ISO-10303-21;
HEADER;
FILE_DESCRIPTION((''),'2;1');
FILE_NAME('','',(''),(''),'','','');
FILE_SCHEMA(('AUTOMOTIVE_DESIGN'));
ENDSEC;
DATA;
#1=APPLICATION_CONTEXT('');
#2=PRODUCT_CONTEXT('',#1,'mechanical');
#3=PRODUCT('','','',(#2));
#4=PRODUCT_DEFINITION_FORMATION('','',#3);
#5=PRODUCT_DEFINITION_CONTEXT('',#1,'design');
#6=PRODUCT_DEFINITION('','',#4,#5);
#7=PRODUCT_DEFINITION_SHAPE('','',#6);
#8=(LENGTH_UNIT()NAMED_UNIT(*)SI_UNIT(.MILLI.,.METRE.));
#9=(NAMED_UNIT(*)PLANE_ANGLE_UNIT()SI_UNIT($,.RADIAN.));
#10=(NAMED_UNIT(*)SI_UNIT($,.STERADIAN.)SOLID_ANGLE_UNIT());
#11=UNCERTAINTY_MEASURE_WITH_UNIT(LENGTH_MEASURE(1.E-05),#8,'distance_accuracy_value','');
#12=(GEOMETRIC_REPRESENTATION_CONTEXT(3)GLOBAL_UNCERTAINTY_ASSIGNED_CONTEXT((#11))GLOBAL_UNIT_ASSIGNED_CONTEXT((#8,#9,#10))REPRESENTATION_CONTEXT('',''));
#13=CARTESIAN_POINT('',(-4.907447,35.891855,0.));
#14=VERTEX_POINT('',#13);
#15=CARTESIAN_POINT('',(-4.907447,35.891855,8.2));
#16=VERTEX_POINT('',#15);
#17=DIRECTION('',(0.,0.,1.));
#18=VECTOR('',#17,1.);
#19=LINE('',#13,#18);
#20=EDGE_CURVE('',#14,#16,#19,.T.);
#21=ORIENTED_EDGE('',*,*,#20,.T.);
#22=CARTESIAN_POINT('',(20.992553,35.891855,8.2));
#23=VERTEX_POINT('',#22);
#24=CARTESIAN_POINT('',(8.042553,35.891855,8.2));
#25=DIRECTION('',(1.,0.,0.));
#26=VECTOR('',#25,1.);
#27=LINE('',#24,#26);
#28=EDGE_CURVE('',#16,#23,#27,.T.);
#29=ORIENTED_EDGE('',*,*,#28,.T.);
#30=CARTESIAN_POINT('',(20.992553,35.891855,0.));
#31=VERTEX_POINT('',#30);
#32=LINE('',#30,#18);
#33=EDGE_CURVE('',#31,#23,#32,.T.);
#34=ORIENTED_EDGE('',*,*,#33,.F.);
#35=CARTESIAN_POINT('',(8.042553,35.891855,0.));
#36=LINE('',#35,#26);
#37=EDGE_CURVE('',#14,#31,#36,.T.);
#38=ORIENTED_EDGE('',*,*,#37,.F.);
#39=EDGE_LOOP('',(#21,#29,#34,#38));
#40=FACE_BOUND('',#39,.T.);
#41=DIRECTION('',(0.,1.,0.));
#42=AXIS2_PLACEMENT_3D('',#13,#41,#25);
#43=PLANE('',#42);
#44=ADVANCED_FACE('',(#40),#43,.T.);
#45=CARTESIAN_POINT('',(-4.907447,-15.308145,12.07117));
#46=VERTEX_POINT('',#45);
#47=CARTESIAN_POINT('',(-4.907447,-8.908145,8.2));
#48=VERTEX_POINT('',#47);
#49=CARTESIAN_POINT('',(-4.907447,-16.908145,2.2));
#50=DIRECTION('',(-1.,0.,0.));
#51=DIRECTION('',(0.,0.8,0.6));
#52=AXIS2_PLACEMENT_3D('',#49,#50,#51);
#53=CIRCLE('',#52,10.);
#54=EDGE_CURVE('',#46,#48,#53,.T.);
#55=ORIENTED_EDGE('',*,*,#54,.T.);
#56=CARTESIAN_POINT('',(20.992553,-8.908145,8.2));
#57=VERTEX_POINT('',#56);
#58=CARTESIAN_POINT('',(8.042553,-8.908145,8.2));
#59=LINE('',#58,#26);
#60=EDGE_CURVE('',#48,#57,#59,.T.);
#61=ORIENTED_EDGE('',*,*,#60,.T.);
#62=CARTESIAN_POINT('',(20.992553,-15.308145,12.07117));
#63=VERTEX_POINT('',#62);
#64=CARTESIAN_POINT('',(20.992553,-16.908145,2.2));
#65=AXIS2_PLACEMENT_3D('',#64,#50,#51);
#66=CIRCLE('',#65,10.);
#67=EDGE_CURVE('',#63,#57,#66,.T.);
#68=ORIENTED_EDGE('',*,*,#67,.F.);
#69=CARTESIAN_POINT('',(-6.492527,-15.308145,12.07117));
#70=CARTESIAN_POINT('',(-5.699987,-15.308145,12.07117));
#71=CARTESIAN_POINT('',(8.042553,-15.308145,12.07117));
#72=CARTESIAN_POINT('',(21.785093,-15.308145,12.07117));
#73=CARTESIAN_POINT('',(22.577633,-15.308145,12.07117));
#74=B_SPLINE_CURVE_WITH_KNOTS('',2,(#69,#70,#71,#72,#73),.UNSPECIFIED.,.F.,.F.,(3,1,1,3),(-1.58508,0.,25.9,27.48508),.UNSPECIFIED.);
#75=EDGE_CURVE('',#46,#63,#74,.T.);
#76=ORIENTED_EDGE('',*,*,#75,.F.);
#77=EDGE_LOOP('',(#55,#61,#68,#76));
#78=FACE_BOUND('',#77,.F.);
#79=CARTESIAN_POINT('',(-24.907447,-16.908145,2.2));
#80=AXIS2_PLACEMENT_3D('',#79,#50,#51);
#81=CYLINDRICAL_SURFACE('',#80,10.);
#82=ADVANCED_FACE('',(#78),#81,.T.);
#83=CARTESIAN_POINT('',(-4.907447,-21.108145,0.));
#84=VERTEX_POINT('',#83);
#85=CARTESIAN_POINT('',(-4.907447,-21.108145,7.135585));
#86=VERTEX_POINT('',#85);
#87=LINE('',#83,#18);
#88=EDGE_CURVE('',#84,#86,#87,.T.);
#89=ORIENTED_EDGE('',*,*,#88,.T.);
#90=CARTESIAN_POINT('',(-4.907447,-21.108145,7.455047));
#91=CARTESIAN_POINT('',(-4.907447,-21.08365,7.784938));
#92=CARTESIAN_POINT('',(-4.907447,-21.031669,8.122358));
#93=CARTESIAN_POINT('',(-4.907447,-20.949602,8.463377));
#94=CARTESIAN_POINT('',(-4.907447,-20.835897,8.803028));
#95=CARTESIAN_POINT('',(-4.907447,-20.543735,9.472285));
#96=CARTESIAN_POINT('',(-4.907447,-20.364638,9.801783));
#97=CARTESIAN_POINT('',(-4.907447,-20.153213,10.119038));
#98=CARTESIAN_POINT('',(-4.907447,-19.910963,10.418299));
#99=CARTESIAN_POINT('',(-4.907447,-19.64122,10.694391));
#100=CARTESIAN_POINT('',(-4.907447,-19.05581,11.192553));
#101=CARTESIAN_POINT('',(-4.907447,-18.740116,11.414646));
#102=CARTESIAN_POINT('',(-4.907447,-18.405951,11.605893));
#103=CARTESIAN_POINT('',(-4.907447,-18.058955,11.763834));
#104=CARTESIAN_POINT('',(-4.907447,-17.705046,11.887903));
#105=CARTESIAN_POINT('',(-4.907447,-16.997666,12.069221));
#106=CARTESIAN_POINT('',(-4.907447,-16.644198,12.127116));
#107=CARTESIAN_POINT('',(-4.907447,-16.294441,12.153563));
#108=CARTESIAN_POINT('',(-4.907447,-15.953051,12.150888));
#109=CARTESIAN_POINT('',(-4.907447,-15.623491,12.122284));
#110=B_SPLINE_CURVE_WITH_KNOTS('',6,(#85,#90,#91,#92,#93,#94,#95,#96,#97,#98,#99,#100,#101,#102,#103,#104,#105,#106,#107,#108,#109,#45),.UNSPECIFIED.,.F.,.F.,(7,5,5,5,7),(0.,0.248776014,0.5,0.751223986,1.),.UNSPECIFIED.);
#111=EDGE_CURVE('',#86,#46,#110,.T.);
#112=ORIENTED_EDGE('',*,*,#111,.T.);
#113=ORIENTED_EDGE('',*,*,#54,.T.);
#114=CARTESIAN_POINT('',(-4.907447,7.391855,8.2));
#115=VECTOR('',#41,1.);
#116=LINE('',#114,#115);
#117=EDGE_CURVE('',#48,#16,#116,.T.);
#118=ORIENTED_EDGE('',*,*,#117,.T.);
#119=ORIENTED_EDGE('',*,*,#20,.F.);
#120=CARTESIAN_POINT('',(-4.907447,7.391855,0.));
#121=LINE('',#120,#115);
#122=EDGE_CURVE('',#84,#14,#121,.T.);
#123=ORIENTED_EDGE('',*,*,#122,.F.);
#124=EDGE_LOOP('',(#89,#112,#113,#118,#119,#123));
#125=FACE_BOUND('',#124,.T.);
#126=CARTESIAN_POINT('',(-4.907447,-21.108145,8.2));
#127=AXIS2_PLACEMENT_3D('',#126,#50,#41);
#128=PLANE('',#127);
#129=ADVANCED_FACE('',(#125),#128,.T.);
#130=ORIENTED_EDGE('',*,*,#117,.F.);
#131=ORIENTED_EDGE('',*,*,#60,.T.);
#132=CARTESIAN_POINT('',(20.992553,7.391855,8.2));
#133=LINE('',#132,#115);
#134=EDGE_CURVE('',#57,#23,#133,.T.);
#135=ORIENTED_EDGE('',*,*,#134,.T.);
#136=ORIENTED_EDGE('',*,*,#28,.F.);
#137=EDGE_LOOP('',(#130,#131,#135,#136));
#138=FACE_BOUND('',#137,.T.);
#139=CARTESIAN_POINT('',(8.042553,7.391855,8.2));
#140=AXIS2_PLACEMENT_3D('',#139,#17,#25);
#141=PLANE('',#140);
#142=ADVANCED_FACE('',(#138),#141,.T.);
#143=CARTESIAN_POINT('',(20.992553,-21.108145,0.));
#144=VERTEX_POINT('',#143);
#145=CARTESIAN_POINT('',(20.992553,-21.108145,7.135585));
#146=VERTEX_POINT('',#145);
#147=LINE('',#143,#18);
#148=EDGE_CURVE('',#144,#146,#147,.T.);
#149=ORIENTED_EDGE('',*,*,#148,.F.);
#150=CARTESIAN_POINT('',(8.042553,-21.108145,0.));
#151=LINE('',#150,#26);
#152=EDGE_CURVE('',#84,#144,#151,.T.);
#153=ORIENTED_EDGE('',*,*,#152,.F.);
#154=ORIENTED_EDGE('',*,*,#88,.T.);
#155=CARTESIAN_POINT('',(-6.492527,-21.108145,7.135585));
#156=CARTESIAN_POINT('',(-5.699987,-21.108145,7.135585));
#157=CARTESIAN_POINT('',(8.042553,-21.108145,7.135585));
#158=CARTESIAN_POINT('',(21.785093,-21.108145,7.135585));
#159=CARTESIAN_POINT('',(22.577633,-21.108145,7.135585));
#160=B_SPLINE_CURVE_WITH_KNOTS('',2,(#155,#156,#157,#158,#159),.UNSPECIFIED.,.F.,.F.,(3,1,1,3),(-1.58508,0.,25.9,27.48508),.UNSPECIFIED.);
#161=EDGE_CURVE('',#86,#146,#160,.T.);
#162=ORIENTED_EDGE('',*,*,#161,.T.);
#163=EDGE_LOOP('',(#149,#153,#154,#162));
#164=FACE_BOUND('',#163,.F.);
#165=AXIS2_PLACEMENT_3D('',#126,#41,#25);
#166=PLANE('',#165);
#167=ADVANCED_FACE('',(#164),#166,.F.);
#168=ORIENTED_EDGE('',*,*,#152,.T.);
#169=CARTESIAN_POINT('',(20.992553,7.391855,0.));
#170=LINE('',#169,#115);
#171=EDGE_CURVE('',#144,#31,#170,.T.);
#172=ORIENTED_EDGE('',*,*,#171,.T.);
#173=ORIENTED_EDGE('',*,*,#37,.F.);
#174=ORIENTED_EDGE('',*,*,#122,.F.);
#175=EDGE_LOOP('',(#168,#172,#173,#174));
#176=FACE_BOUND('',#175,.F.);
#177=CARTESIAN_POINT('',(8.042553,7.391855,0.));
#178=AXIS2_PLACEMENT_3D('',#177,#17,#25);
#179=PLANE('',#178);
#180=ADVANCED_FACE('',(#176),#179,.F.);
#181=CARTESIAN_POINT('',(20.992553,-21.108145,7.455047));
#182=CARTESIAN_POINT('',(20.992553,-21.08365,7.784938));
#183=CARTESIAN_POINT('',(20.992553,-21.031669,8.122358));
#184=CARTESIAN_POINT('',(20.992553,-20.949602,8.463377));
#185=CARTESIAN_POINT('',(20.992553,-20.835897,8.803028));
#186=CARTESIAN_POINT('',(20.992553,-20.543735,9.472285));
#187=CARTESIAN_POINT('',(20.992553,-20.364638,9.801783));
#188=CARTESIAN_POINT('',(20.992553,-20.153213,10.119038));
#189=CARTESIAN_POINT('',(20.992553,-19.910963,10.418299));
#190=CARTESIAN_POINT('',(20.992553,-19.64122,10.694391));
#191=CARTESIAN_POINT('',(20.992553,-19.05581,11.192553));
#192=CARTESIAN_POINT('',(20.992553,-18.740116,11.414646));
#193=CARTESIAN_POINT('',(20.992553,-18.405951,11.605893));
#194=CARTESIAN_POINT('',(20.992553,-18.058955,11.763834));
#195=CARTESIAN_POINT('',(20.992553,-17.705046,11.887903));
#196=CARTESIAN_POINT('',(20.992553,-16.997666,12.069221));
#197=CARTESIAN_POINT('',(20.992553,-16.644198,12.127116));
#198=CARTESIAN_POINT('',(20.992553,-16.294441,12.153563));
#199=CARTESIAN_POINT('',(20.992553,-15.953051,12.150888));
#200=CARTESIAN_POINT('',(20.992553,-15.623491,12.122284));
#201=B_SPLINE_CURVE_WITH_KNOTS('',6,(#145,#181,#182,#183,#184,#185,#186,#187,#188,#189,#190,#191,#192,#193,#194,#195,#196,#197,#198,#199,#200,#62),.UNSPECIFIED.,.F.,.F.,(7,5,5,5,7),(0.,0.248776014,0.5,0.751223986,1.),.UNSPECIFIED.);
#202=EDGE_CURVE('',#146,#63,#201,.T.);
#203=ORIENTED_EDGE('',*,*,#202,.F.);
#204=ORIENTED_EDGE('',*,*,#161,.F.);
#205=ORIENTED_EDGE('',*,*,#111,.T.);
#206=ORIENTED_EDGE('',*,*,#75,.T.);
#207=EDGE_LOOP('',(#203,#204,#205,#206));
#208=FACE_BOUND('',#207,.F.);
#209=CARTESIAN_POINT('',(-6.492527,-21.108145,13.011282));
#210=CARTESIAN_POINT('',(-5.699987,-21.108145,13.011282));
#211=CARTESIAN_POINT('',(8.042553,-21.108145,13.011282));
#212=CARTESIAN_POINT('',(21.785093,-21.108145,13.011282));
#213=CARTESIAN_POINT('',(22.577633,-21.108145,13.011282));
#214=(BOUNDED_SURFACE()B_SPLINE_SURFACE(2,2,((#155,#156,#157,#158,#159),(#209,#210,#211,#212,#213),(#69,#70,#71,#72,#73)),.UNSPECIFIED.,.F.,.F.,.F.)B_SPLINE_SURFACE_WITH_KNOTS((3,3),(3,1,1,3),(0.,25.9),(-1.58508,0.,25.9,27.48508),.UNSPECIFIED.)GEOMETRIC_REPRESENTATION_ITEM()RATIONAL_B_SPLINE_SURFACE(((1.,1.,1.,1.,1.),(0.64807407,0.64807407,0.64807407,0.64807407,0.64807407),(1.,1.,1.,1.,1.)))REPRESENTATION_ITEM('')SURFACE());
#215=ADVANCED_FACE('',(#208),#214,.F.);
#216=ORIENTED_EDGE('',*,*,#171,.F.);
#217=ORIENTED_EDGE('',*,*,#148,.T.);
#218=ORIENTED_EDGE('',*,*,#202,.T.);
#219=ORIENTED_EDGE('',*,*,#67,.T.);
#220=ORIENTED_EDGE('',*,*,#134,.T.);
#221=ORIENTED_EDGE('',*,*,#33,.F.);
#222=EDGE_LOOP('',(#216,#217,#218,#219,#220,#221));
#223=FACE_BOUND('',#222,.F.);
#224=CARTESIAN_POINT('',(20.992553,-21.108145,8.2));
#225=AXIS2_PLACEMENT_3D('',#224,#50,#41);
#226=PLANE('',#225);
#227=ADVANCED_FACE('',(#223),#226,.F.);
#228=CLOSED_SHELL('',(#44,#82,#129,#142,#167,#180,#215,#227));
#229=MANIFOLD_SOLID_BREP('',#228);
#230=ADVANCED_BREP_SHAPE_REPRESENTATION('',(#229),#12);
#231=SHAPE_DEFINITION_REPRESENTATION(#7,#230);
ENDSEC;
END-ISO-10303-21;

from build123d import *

# Parameters (mm, degrees)
F0_W        = 25.9
F0_H        = 57
F1_DEPTH    = 8.2
F2_W        = 25.9
F2_H        = 12.2
F3_DEPTH    = 4
F4_T1_DEPTH = 65.9
F5_R        = 5


# Not quite as in the source:
# - a fillet or chamfer that OpenCascade refuses, or shapes differently, is made with other operations: its cross-section is extruded or revolved along the edge and cut away or added


with BuildPart() as f1:
    # F0 (on Top) → F1 (new body)
    with BuildSketch(Plane.XY):
        with Locations((8.0425532069, 7.3918554072)):
            Rectangle(F0_W, F0_H)
    extrude(amount=F1_DEPTH)

    # F2 (on face) → F3 (join)
    with BuildSketch(Plane.XY.offset(8.2)):
        with Locations((8.0425532069, -15.0081445928)):
            Rectangle(F2_W, F2_H)
    extrude(amount=F3_DEPTH)

    # F4: fillet of radius 10 on 1 edges, made by hand

    # F4_s2 → F4_t1 (cut)
    with BuildSketch(Plane.YZ.offset(-24.9074467931)):
        with BuildLine():
            ThreePointArc((-8.9081445928, 8.2), (-12.4360086378, 11.14427191), (-16.9081445928, 12.2))
            Line((-16.9081445928, 12.2), (-8.9081445928, 12.2))
            Line((-8.9081445928, 12.2), (-8.9081445928, 8.2))
        make_face()
    extrude(amount=F4_T1_DEPTH, mode=Mode.SUBTRACT)

    # F5
    f5_edges = [f1.edges().sort_by_distance(p)[0] for p in [
        (8.042553, -21.108145, 12.2),
    ]]
    fillet(f5_edges, radius=F5_R)


solid = f1.part
